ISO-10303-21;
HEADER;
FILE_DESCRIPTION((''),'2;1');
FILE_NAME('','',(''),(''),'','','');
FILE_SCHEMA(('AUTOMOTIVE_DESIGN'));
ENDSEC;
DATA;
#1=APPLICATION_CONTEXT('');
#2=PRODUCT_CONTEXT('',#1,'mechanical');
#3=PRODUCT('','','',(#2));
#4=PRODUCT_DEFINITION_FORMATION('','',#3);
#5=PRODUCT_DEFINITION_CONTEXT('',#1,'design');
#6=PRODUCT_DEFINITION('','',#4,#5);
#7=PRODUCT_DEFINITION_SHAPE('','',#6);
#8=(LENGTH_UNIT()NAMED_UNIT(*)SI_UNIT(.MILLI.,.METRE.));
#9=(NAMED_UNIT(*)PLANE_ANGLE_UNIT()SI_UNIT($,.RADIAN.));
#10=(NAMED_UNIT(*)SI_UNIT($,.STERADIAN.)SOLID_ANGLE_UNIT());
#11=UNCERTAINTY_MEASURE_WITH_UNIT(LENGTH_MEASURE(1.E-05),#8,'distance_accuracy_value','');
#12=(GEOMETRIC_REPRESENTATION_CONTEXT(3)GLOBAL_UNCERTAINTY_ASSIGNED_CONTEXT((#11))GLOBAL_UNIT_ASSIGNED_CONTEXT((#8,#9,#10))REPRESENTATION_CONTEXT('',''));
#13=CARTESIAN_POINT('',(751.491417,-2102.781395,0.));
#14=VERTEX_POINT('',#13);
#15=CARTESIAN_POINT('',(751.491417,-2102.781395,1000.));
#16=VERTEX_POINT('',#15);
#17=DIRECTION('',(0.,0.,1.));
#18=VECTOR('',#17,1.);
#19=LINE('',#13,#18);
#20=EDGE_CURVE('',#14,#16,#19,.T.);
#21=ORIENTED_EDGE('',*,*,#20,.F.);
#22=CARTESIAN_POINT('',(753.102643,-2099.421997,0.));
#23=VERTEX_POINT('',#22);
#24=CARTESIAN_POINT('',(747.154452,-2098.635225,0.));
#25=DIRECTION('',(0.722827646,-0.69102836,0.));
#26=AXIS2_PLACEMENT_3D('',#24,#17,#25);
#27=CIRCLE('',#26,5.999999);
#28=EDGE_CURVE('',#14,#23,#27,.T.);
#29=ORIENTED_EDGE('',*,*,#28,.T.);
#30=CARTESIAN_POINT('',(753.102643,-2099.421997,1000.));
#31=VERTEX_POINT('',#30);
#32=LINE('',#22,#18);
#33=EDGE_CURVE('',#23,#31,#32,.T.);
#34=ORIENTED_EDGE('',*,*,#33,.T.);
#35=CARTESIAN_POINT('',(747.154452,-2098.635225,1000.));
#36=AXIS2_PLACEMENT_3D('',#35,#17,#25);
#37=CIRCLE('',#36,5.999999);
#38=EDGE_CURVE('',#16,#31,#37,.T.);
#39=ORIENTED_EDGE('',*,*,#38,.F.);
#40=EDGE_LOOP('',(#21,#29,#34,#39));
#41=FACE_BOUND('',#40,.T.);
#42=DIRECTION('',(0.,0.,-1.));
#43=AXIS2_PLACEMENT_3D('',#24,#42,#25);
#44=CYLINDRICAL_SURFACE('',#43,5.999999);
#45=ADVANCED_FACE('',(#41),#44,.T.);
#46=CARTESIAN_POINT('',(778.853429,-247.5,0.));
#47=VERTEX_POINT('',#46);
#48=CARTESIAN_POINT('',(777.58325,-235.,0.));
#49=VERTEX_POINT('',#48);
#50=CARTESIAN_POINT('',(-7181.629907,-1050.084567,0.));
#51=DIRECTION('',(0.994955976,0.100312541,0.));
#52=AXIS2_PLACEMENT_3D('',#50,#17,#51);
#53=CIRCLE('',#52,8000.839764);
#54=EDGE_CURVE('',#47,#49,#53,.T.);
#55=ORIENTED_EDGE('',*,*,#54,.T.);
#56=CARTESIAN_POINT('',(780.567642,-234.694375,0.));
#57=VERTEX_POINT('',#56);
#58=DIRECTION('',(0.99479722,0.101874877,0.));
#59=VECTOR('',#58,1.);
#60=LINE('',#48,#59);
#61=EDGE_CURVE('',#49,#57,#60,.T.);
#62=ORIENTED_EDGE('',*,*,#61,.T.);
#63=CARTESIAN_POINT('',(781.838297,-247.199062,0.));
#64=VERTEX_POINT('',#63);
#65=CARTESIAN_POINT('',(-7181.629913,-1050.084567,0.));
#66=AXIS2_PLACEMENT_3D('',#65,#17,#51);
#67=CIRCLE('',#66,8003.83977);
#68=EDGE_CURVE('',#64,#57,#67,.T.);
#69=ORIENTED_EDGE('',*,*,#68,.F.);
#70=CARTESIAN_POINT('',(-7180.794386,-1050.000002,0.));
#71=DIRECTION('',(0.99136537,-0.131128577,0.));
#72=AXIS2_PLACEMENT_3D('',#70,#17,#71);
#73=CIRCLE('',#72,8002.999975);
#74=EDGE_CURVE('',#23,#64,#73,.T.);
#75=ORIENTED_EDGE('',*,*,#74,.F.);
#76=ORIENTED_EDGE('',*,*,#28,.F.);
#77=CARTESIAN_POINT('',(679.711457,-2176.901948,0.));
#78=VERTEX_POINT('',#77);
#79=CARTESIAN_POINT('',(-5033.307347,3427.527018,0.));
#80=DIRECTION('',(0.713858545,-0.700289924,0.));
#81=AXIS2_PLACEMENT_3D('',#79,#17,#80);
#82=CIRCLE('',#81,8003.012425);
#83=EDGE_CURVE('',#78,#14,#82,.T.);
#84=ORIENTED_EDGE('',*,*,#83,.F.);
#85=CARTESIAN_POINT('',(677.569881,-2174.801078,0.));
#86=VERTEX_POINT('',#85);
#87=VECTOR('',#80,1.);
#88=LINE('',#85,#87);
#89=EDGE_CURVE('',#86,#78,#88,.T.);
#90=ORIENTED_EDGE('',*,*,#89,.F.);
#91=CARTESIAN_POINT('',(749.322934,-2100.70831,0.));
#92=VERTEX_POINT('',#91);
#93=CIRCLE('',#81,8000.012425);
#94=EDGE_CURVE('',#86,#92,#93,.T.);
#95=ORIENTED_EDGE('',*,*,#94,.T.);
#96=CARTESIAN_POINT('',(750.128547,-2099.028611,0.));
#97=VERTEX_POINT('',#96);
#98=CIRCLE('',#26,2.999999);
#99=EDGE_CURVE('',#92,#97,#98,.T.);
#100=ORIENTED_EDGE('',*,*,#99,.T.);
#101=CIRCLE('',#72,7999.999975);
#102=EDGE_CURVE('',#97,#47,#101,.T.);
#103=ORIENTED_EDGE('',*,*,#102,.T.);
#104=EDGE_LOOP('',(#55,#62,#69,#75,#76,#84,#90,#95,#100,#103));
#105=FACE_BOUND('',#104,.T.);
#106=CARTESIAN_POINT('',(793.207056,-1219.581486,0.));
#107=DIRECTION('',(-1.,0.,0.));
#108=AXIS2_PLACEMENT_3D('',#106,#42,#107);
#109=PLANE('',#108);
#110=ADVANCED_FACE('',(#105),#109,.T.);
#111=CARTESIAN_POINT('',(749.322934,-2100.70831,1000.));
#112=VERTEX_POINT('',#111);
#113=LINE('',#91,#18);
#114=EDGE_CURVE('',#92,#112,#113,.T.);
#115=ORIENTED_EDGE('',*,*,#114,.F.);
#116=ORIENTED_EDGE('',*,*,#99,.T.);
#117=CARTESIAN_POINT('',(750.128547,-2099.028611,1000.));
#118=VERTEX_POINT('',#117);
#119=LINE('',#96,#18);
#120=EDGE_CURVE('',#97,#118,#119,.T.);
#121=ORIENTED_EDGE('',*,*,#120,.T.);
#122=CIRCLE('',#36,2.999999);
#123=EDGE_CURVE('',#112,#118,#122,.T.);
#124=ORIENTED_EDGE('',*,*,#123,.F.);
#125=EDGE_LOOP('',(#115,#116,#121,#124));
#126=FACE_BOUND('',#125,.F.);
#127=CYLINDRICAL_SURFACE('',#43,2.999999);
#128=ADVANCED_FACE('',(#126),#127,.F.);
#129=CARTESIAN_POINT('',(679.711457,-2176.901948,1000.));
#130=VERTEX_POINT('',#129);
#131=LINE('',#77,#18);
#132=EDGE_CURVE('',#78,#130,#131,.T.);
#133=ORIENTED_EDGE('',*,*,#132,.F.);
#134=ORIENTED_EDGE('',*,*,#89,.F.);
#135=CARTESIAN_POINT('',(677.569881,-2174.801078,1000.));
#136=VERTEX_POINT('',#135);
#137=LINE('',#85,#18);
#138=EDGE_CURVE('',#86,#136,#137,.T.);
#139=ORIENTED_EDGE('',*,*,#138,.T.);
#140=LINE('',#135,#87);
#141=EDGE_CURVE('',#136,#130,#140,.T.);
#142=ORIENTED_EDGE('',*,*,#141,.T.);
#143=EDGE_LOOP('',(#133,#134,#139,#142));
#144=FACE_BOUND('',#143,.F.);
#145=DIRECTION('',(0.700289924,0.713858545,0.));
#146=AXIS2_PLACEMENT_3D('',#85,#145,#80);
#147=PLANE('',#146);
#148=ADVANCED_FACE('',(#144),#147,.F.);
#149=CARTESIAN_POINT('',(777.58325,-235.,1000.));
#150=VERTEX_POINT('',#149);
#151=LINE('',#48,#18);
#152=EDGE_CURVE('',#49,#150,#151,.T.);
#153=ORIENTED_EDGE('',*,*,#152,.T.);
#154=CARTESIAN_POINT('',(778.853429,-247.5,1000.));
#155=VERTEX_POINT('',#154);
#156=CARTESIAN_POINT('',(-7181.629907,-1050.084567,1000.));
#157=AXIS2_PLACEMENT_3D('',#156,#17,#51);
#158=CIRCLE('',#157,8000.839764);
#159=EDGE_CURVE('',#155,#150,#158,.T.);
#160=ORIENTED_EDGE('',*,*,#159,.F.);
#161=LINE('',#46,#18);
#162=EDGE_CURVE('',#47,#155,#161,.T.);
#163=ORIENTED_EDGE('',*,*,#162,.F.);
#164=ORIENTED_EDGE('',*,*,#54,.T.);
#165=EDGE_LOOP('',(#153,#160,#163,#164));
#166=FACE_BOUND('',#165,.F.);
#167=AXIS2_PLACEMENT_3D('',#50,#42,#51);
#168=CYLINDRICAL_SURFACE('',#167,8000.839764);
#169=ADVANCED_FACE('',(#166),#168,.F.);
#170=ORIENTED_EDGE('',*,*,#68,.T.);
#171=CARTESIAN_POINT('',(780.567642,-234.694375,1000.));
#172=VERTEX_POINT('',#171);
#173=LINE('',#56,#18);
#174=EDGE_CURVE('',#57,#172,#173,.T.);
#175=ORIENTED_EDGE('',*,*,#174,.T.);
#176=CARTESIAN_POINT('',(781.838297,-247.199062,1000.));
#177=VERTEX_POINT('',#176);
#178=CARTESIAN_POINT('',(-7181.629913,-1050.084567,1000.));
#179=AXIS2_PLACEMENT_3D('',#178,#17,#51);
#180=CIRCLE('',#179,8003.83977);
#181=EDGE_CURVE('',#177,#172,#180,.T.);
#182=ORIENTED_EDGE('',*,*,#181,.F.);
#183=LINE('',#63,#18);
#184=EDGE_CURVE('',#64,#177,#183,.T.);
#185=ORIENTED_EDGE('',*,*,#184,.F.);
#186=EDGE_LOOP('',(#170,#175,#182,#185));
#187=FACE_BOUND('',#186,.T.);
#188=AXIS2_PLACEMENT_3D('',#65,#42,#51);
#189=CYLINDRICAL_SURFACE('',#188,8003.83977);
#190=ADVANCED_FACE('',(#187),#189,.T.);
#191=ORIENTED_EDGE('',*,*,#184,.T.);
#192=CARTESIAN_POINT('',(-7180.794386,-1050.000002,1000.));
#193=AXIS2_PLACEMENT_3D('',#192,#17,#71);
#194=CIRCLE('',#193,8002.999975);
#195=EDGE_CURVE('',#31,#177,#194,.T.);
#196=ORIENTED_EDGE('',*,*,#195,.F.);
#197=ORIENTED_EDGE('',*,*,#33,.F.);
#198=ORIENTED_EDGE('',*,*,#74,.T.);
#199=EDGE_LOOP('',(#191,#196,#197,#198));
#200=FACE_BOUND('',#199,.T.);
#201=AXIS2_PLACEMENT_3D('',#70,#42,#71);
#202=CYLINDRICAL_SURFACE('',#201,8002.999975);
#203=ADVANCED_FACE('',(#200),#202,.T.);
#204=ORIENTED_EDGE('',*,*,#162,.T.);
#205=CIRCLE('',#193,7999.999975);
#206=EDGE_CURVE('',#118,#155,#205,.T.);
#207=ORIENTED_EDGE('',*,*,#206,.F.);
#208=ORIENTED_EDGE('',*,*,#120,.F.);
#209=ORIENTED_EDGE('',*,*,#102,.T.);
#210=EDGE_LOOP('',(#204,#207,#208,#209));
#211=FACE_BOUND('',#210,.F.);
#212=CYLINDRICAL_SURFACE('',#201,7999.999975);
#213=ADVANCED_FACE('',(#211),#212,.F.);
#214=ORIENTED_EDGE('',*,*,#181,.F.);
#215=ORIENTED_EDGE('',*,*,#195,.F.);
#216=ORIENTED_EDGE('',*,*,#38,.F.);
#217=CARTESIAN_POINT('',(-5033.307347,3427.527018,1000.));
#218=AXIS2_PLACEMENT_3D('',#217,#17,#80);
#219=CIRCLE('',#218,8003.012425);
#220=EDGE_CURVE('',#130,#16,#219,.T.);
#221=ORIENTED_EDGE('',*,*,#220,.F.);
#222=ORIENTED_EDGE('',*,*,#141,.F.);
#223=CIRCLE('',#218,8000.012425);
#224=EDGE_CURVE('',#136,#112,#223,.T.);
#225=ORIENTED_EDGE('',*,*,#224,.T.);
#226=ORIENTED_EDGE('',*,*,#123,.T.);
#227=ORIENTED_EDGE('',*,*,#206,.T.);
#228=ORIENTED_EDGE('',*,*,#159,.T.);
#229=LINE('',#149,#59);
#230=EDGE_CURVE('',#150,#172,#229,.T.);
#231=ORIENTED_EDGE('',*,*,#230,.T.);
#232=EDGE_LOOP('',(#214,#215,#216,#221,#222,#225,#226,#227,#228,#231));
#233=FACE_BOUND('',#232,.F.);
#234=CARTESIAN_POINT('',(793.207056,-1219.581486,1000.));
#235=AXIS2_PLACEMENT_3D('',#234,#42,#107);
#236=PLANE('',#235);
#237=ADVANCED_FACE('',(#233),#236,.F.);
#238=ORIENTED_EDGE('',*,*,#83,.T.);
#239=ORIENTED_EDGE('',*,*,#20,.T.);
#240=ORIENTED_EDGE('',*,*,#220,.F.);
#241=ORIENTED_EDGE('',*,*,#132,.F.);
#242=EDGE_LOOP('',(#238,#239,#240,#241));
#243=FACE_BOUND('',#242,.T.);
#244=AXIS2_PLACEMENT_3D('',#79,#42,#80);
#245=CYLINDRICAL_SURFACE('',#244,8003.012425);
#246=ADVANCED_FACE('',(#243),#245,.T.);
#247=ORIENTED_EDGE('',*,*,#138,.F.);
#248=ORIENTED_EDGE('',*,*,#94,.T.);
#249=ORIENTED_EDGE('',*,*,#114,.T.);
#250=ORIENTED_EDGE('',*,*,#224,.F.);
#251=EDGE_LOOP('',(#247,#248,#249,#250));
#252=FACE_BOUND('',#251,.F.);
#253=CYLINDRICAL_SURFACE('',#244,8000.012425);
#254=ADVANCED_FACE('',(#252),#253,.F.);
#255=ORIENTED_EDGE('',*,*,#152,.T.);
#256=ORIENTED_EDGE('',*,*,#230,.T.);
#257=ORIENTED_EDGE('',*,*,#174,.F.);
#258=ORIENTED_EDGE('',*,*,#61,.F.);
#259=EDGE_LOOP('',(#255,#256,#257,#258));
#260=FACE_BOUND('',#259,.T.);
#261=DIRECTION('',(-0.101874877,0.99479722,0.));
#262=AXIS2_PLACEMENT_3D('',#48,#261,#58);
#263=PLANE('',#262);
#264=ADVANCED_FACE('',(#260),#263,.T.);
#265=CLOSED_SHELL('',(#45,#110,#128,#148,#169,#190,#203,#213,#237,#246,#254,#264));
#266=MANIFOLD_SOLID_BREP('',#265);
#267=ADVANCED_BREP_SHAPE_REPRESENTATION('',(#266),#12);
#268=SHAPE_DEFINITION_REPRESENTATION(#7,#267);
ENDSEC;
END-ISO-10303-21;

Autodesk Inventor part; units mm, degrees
ref_plane "YZ Plane" through (0, 0, 0) normal (1, 0, 0) x (0, 1, 0)
ref_plane "XZ Plane" through (0, 0, 0) normal (0, 1, 0) x (-1, 0, 0)
ref_plane "XY Plane" through (0, 0, 0) normal (0, 0, 1) x (1, 0, 0)
sketch "Sketch1" plane through (0, 0, 0) normal (0, 0, 1) x (1, 0, 0)
  line L0 (-750, 0) -> (750, 0) construction
  line L1 (750, 0) -> (750, -2100) construction
  line L2 (750, -2100) -> (110, -2700) construction
  line L3 (108.907697, -2700) -> (-108.907697, -2700) construction
  line L4 (-110, -2700) -> (-750, -2100) construction
  line L5 (-750, -2100) -> (-750, 0) construction
  arc A0 (745.236855, 0.447083) -> (-745.236855, 0.447083) centre (0, -7964.766161) ccw construction
  arc A1 (-750.626493, -4.742884) -> (-776.293231, -222.5) centre (7180.794412, -1050) ccw construction
  arc A2 (-777.58325, -235) -> (-778.853429, -247.5) centre (7180.794412, -1050) ccw construction
  arc A3 (750.128547, -2099.028611) -> (778.853429, -247.5) centre (-7180.794412, -1050) ccw
  arc A4 (777.58325, -235) -> (776.293231, -222.5) centre (-7180.794412, -1050) ccw construction
  line L6 (-777.58325, -235) -> (777.58325, -235) construction
  arc A5 (-749.322934, -2100.70831) -> (-677.569881, -2174.801078) centre (5033.298449, 3427.518345) ccw construction
  line L7 (-750, -2100) -> (750, -2100) construction
  line L8 (-547.172872, -2035.710935) -> (-801.083389, -2306.54882) construction
  arc A6 (-677.569881, -2174.801078) -> (-110.836747, -2699.297556) centre (5033.298449, 3427.518345) ccw construction
  arc A7 (-745.236855, 0.447083) -> (-750.626493, -4.742884) centre (-744.677927, -5.526826) ccw construction
  arc A8 (750.626493, -4.742884) -> (745.236855, 0.447083) centre (744.677927, -5.526826) ccw construction
  arc A9 (-750.128547, -2099.028611) -> (-749.322934, -2100.70831) centre (-747.154451, -2098.635225) ccw construction
  arc A10 (110.836747, -2699.297556) -> (677.569881, -2174.801078) centre (-5033.298449, 3427.518345) ccw construction
  line L9 (553.81945, -2042.800618) -> (794.436811, -2299.459137) construction
  arc A11 (677.569881, -2174.801078) -> (749.322934, -2100.70831) centre (-5033.298449, 3427.518345) ccw
  arc A12 (749.322934, -2100.70831) -> (750.128547, -2099.028611) centre (747.154451, -2098.635225) ccw
  arc A13 (-110.836747, -2699.297556) -> (-108.907697, -2700) centre (-108.907697, -2697) ccw construction
  arc A14 (108.907697, -2700) -> (110.836747, -2699.297556) centre (108.907697, -2697) ccw construction
  line L10 (776.293231, -222.5) -> (-776.293231, -222.5) construction
  line L11 (778.853429, -247.5) -> (-778.853429, -247.5) construction
  arc A15 (778.853429, -247.5) -> (777.58325, -235) centre (-7180.794412, -1050) ccw
  arc A16 (776.293231, -222.5) -> (750.626493, -4.742884) centre (-7180.794412, -1050) ccw construction
  arc A17 (-776.293231, -222.5) -> (-777.58325, -235) centre (7180.794412, -1050) ccw construction
  arc A18 (-778.853429, -247.5) -> (-750.128547, -2099.028611) centre (7180.794412, -1050) ccw construction
  point P0 (0, 0)
  point P1 (0, 0)
  point P2 (0, 0)
  point P3 (0, -2700)
  point P4 (-674.128131, -2171.129877)
  point P5 (674.128131, -2171.129877)
  dimension "d43" = 1500
  dimension "d44" = 2100
  dimension "d45" = 220
  dimension "d46" = 2700
  dimension "d47" = 8000
  dimension "d48" = 8000
  dimension "d49" = 8000
  dimension "d50" = 235
  dimension "d51" = 8000
  dimension "d52" = 104
  dimension "d53" = 6
  dimension "d54" = 3
  dimension "d55" = 8000
  dimension "d56" = 104
  dimension "d57" = 3
  dimension "d67" = 12.5
  dimension "d68" = 12.5
contour flange "Contour Flange1" sketch "Sketch1" thickness 3 bend radius 3 width 1000 along (0, 0, 1) mid plane no both sides no wall seen from (713.565816, -2137.870332, 0) lies toward (0.718358, -0.6956736, 0) curves A11 A12 A3 A15
bend "Bend1"
corner "Corner1"
equation "\"d43\" = Бак_ширина_общая"
equation "\"d44\" = Бак_высота_до_конуса"
equation "\"d45\" = Бак_брюхо_ширина_полки"
equation "\"d46\" = Бак_высота_общая"
equation "\"d47\" = Бак_радиус_стенок_общий"
equation "\"d48\" = Бак_радиус_стенок_общий"
equation "\"d49\" = Бак_радиус_стенок_общий"
equation "\"d50\" = Бак_спина_длина_фланцев"
equation "\"d51\" = Бак_радиус_стенок_общий"
equation "\"d52\" = Бак_борт_длина_фланца"
equation "\"d53\" = d65 + d66"
equation "\"d54\" = Thickness"
equation "\"d55\" = Бак_радиус_стенок_общий"
equation "\"d56\" = Бак_борт_длина_фланца"
equation "\"d67\" = Бак_нахлест_фланца"
equation "\"d68\" = Бак_нахлест_фланца"
equation "\"d8\" = Thickness"
equation "\"d9\" = BendReliefWidth"
equation "\"d10\" = BendReliefDepth"
equation "\"d11\" = MinimumRemnant"
equation "\"d12\" = TransitionRadius"
equation "\"d14\" = BendRadius"
equation "\"d16\" = CornerReliefSize"
equation "\"d17\" = GapSize"
equation "\"d18\" = JacobiRadiusSize"
equation "\"BendRadius\" = Thickness"
equation "\"BendReliefWidth\" = Thickness"
equation "\"BendReliefDepth\" = 0.5 * Thickness"
equation "\"CornerReliefSize\" = 4 * Thickness"
equation "\"MinimumRemnant\" = 2 * Thickness"
equation "\"TransitionRadius\" = BendRadius"
equation "\"JacobiRadiusSize\" = BendRadius"
equation "\"GapSize\" = Thickness"
equation "\"d66\" = d65"
equation "\"Бак_ширина_общая\" = 1500"
equation "\"Бак_высота_до_конуса\" = 2100"
equation "\"Бак_брюхо_ширина_полки\" = 220"
equation "\"Бак_радиус_стенок_общий\" = 8000"
equation "\"Бак_спина_длина_фланцев\" = 235"
equation "\"d65\" = 3"
equation "\"Thickness\" = 3"
equation "\"Бак_нахлест_фланца\" = 12.5"
equation "\"Бак_высота_общая\" = 2700"
equation "\"Бак_борт_длина_фланца\" = 104"
properties part number "МОО 020 лист борт 1"
